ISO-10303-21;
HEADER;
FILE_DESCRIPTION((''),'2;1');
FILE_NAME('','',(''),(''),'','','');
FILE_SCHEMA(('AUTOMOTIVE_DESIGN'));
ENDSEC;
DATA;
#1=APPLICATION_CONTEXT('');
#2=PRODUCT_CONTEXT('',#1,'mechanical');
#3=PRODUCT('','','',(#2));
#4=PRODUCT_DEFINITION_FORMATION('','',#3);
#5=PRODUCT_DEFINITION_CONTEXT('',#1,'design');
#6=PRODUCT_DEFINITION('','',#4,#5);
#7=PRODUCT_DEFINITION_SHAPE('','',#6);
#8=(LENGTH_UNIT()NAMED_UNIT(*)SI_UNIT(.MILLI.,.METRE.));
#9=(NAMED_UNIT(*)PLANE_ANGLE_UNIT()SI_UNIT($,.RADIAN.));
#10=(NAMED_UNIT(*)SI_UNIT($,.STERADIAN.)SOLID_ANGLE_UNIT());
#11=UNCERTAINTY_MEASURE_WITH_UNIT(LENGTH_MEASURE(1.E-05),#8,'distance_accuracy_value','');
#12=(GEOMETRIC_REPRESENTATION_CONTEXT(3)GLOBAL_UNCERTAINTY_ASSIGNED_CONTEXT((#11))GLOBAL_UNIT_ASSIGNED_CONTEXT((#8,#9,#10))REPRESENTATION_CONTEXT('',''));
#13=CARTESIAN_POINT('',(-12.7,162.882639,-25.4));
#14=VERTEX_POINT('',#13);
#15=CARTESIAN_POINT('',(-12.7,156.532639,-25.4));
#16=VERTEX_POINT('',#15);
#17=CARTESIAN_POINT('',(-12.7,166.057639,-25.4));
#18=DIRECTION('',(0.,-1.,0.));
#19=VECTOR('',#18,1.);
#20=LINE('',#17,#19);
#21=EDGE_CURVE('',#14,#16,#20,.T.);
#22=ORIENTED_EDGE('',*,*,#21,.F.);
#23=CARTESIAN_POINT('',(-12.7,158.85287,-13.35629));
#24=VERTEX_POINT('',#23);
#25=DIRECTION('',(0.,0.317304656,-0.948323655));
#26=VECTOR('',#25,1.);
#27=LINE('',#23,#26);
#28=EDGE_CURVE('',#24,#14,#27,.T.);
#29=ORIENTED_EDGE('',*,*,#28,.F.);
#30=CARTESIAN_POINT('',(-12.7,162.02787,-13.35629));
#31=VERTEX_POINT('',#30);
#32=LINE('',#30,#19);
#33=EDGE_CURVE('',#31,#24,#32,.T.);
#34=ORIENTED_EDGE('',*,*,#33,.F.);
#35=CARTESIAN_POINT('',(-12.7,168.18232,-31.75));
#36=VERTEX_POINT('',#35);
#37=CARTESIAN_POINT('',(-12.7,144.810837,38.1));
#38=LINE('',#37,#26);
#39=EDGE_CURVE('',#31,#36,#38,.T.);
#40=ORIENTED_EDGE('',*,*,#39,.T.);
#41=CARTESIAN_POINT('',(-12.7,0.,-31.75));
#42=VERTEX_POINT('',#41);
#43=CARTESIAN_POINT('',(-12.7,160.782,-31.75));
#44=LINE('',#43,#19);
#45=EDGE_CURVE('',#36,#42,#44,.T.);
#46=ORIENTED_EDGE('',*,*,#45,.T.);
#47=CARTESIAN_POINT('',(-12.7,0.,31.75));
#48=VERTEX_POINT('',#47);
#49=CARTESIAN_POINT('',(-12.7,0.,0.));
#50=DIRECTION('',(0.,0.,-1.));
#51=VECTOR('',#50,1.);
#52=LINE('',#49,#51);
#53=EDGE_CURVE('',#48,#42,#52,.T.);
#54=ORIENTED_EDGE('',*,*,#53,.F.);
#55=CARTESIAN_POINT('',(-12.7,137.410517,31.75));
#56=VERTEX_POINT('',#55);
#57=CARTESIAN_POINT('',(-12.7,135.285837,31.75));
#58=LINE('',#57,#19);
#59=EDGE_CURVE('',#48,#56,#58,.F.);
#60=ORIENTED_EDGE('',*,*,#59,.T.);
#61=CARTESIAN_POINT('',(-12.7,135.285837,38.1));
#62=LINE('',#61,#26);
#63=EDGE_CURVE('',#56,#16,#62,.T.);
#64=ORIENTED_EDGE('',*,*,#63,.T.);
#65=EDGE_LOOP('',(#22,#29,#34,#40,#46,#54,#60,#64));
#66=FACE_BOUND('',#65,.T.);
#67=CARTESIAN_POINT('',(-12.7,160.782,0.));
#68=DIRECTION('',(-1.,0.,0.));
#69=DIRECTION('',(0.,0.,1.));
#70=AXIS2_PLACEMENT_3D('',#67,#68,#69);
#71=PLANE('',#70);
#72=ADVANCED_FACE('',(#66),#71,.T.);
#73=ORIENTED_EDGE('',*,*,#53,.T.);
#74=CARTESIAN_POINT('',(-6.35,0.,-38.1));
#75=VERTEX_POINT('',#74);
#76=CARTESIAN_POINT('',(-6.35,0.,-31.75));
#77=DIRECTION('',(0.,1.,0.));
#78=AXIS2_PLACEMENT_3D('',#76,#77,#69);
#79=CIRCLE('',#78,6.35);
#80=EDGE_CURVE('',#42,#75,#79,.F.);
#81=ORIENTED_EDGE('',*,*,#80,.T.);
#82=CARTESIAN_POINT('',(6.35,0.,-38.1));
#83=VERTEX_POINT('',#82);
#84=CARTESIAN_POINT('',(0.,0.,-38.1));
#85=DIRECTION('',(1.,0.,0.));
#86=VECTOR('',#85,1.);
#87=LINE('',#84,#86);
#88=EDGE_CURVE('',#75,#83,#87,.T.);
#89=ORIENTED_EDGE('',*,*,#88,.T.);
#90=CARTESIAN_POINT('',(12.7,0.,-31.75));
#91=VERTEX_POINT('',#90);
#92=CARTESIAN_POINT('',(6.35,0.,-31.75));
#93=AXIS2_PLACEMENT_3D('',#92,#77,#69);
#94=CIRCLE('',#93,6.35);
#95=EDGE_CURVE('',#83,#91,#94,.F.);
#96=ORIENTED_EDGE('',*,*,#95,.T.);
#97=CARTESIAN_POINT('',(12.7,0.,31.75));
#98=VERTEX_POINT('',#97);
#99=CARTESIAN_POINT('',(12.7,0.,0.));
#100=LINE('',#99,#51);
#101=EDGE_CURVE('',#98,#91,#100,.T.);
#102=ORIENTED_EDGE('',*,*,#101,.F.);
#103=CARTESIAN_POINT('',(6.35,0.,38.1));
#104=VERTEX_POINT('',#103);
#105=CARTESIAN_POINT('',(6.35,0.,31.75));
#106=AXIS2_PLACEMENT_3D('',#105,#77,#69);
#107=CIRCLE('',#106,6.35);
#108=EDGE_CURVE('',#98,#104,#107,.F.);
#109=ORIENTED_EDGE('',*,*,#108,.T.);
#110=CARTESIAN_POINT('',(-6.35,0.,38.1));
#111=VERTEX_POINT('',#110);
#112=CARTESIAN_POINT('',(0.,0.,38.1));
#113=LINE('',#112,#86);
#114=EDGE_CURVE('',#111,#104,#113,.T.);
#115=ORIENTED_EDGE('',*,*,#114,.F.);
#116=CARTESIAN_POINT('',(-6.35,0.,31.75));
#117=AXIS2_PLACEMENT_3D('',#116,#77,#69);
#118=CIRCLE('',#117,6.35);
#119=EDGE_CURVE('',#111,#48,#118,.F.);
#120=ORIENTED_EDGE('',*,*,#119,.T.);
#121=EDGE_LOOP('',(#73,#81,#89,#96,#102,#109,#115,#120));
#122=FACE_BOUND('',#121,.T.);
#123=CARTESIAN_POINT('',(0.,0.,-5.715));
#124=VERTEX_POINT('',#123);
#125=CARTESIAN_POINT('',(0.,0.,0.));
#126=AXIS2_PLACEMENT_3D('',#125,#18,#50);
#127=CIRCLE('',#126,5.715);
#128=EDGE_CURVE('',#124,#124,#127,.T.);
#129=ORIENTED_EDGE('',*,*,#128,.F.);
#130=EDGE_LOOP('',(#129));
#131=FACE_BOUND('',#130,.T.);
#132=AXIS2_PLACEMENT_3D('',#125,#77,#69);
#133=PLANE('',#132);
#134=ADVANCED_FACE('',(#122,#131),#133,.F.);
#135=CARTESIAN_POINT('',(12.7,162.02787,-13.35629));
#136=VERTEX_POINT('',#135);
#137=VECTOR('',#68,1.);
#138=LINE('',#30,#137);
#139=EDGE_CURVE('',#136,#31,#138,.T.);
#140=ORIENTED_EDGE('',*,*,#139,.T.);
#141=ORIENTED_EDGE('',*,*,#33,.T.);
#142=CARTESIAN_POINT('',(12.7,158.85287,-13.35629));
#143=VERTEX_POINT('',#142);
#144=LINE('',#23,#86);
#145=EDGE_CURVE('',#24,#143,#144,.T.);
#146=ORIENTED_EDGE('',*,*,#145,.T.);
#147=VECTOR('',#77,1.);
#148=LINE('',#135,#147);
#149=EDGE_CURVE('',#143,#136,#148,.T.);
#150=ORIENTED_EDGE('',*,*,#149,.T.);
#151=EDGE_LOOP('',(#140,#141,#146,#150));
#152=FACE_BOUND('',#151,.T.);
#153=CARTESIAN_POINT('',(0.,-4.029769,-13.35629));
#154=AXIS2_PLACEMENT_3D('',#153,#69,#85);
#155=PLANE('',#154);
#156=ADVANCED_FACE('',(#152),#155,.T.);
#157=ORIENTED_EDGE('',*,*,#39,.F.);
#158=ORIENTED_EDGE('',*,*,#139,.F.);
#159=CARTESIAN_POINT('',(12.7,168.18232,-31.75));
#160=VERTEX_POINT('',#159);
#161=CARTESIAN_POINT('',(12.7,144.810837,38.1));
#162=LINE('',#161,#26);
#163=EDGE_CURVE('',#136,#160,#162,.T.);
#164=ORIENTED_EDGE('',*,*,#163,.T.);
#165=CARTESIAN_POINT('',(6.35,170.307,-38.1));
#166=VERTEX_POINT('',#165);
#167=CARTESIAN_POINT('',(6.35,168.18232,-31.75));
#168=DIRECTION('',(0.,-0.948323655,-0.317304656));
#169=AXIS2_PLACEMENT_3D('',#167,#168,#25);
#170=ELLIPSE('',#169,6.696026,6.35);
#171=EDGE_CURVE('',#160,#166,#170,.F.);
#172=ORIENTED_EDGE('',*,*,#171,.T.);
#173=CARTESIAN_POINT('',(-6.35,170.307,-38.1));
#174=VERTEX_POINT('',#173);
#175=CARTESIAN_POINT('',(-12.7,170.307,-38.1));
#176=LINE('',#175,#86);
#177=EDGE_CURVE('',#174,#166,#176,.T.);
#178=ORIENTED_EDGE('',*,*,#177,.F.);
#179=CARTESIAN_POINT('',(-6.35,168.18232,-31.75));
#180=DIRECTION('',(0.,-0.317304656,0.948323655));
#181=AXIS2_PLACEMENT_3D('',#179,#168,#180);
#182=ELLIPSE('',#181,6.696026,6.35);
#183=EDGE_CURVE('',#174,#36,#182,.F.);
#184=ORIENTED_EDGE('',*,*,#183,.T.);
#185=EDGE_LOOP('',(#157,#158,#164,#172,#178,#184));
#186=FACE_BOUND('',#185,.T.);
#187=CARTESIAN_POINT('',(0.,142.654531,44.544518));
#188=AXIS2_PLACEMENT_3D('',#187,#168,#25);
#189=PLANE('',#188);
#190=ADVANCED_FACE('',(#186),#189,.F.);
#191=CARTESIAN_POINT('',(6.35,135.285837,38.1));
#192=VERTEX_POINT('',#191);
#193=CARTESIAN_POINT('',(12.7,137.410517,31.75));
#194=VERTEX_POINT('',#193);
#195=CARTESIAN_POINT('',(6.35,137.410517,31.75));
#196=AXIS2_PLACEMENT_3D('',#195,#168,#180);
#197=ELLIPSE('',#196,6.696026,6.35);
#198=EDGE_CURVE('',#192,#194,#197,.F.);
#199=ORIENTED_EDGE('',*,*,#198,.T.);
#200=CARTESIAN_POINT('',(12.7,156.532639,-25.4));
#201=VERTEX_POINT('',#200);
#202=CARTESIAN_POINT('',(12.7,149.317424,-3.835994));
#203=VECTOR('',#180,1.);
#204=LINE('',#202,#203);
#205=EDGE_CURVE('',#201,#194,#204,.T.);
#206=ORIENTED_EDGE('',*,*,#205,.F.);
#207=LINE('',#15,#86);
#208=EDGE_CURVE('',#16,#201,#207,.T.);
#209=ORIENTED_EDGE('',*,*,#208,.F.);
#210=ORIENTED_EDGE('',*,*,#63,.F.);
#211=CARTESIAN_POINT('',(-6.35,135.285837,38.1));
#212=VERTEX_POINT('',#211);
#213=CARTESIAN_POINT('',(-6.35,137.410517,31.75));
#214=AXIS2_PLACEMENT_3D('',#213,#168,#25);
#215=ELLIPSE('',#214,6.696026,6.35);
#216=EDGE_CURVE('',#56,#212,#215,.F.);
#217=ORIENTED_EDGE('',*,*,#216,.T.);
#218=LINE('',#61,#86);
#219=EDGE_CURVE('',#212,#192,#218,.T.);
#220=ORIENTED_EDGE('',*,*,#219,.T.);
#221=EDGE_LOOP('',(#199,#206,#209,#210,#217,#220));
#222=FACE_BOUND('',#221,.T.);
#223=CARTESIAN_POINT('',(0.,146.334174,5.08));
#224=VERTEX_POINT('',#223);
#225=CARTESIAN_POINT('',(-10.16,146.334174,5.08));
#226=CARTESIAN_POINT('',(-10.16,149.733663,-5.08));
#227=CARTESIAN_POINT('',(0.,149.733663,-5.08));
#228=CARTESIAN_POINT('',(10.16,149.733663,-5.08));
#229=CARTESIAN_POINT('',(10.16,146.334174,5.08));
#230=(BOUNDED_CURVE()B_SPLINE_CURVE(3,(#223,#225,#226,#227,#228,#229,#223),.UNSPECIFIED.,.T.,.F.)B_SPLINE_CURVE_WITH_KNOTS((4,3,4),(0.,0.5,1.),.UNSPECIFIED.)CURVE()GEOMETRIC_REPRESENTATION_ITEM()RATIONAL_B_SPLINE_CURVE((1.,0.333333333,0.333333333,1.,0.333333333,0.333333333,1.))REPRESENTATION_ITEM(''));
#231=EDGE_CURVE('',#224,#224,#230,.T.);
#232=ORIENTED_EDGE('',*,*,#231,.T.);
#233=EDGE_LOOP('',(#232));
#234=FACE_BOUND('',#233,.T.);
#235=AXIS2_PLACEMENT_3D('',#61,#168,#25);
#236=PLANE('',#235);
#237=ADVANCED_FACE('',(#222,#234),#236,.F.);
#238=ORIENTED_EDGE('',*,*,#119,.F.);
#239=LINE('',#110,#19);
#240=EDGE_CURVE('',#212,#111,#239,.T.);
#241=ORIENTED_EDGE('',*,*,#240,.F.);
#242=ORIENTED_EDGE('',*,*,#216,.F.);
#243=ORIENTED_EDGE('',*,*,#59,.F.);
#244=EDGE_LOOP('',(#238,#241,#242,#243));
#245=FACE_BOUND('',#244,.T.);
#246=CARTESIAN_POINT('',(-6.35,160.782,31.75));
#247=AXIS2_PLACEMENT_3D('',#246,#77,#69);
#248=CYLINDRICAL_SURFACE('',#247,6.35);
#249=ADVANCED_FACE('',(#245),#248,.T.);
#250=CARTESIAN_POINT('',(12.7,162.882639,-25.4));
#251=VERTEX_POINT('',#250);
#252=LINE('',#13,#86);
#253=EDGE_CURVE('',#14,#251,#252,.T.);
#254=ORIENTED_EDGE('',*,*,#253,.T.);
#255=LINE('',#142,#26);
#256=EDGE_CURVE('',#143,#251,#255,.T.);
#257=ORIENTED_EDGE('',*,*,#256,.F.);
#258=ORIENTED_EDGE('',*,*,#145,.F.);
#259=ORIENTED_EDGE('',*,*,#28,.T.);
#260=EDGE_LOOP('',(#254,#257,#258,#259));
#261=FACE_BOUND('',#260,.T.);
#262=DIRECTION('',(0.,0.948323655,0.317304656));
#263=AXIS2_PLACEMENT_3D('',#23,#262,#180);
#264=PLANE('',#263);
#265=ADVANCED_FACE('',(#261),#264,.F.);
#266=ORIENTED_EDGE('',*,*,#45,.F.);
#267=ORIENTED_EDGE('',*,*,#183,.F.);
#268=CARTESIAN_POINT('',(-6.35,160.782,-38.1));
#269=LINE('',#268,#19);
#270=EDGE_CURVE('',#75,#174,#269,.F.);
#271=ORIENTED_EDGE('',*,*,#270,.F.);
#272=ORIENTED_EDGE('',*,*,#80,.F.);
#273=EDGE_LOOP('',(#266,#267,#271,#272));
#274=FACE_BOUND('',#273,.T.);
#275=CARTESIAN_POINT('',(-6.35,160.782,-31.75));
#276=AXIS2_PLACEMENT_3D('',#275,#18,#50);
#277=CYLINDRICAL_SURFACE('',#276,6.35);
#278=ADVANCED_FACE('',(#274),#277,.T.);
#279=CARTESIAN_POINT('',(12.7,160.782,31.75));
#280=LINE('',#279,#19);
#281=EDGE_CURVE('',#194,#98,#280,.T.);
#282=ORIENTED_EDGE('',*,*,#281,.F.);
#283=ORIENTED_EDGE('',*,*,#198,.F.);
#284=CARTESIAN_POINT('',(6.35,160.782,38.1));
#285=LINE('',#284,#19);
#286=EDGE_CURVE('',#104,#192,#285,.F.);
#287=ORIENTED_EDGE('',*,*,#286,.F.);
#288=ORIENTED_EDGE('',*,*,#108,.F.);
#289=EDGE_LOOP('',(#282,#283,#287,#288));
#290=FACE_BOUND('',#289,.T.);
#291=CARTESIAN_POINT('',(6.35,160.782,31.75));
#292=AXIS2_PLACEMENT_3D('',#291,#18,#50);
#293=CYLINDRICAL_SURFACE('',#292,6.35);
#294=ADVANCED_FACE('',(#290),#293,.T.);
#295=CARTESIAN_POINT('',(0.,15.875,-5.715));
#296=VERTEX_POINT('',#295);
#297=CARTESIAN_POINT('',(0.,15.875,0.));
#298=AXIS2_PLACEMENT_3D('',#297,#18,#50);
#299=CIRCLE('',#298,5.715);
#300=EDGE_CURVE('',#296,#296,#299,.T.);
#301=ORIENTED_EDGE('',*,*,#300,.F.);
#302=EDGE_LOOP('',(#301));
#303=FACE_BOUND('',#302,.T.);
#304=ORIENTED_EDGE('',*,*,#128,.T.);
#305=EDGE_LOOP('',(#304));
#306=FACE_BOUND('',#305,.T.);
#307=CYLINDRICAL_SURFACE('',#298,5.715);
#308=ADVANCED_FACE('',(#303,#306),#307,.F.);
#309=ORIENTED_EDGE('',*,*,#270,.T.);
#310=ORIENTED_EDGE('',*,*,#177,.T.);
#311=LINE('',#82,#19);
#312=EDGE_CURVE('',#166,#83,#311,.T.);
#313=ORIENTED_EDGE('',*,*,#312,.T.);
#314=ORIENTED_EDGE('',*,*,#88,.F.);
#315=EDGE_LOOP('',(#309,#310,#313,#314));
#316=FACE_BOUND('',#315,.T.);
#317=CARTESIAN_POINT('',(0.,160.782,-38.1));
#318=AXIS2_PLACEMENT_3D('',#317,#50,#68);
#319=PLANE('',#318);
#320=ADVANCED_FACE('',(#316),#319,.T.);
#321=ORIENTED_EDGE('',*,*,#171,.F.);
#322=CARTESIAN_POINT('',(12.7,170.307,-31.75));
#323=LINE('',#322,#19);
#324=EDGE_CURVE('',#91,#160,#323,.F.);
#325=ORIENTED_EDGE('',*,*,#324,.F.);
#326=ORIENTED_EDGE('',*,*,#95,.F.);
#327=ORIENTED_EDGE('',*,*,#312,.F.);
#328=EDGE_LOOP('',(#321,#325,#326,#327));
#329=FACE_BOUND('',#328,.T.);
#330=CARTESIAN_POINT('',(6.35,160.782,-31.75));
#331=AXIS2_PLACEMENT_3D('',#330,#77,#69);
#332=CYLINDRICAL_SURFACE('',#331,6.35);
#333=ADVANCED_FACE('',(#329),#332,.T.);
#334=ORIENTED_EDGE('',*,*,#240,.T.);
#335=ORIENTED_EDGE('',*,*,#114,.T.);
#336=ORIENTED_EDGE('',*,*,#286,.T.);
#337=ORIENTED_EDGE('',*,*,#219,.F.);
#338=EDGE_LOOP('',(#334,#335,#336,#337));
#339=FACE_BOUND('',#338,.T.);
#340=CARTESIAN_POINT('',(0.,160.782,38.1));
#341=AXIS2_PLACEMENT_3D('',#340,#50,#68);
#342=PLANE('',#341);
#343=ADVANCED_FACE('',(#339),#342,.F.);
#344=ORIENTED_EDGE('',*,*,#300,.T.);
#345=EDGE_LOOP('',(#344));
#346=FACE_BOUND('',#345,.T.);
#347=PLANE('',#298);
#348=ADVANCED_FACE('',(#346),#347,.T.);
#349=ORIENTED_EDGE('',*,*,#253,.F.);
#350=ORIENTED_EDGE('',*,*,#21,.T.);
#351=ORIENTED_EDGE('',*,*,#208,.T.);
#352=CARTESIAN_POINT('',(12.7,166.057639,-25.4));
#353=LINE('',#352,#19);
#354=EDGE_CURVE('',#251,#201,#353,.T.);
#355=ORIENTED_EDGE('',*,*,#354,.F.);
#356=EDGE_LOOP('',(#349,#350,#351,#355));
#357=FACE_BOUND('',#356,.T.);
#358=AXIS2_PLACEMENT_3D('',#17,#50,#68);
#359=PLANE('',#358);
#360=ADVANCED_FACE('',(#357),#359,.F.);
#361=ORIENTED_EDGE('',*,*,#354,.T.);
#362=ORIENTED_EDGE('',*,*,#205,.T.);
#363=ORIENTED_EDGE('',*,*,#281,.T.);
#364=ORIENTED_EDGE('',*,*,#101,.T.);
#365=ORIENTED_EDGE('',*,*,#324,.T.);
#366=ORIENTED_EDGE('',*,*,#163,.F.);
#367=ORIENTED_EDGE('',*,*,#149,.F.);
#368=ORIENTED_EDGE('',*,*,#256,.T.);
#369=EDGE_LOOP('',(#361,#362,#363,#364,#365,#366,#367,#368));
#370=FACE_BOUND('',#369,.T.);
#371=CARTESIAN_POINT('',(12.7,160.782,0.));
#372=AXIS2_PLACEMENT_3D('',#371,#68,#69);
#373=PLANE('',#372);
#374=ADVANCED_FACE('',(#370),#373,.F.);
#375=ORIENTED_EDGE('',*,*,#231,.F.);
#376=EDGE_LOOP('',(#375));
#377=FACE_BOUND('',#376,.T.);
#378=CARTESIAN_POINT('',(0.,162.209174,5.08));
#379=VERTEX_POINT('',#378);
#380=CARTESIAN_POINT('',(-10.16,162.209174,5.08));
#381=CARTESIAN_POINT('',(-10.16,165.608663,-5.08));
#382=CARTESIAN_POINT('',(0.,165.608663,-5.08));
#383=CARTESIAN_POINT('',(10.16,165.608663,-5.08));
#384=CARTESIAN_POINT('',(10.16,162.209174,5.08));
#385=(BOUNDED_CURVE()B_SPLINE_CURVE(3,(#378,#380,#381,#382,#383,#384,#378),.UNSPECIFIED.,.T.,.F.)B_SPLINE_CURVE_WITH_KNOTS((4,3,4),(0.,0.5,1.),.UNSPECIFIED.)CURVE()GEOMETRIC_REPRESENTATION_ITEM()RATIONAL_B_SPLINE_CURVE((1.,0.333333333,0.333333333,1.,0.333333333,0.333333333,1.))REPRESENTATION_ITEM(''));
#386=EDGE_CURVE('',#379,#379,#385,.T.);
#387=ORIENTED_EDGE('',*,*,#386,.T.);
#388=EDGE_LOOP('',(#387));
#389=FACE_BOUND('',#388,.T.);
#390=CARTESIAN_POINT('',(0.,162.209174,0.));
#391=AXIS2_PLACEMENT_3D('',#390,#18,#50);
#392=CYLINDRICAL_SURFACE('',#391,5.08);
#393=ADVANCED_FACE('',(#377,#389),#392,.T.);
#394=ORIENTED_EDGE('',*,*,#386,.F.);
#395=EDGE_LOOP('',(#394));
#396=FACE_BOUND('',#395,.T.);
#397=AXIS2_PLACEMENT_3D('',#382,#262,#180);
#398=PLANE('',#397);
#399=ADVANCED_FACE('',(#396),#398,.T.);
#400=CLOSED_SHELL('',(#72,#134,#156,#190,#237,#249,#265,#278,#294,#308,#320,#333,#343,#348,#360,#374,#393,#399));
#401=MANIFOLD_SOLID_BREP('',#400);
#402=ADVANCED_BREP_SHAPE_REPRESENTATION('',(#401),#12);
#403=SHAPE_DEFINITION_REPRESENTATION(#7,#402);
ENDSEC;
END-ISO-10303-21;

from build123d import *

# Parameters (mm, degrees)
SKETCH1_W               = 25.4
SKETCH1_H               = 76.2
BOSS_EXTRUDE1_DEPTH     = 160.782
CUT_EXTRUDE2_DEPTH      = 168.175421411
CUT_EXTRUDE2_DEPTH_BACK = 168.175421411
BOSS_EXTRUDE2_REACH     = 177.247
SKETCH1_5_W             = 25.4
SKETCH1_5_H             = 12.7
SKETCH8_W               = 25.4
SKETCH8_H               = 3.175
BOSS_EXTRUDE3_DEPTH     = 12.7
FILLET1_R               = 6.35
BOSS_EXTRUDE4_REACH     = 192.853
SKETCH9_R               = 5.08
SKETCH9_3_R             = 5.715
CUT_EXTRUDE5_DEPTH      = 15.875


with BuildPart() as part:
    # Sketch1 → Boss-Extrude1 (new body)
    with BuildSketch(Plane(origin=(0, 0, 0), x_dir=(1, 0, 0), z_dir=(0, 1, 0))):
        Rectangle(SKETCH1_W, SKETCH1_H)
    extrude(amount=BOSS_EXTRUDE1_DEPTH)

    # Sketch4 → Cut-Extrude2 (cut, two sides: drawn at the far end of the back side and taken through both)
    with BuildSketch(Plane(origin=(12.7, 0, 0), x_dir=(0, 0, -1), z_dir=(1, 0, 0)).offset(-CUT_EXTRUDE2_DEPTH_BACK)):
        Polygon((38.1, 160.782), (-38.1, 160.782), (-38.1, 135.285836654), align=None)
    extrude(amount=CUT_EXTRUDE2_DEPTH + CUT_EXTRUDE2_DEPTH_BACK, mode=Mode.SUBTRACT)

    # Boss-Extrude2: from a plane face, 177.247 long prism both ways, kept between that surface and its translate by the depth
    boss_extrude2_start = Plane(origin=(-12.7, 135.285836654, 38.1), z_dir=(0, -0.9483236552061991, -0.31730465640509276)) * Box(710.988, 710.988, 355.494, align=(Align.CENTER, Align.CENTER, Align.MIN), mode=Mode.PRIVATE)
    boss_extrude2_end = Plane(origin=(-12.7, 144.810836654, 38.1), z_dir=(0, -0.9483236552061991, -0.31730465640509276)) * Box(710.988, 710.988, 355.494, align=(Align.CENTER, Align.CENTER, Align.MIN), mode=Mode.PRIVATE)
    # Sketch1<5> → Boss-Extrude2 (add, from a surface)
    with BuildSketch(Plane(origin=(0, 0, 0), x_dir=(1, 0, 0), z_dir=(0, 1, 0)), mode=Mode.PRIVATE) as boss_extrude2_sk1:
        with Locations((0, 31.75)):
            Rectangle(SKETCH1_5_W, SKETCH1_5_H)
    boss_extrude2_tool1 = extrude(boss_extrude2_sk1.sketch, amount=BOSS_EXTRUDE2_REACH, both=True, mode=Mode.PRIVATE)
    add(((boss_extrude2_tool1 - boss_extrude2_start) & boss_extrude2_end).solids().sort_by_distance((-3.175, 151.220939, -9.525))[0])

    # Sketch8 → Boss-Extrude3 (add, along a direction that is not the sketch's normal)
    with BuildSketch(Plane.XY.offset(-25.4)):
        with Locations((0, 164.470139442)):
            Rectangle(SKETCH8_W, SKETCH8_H)
    extrude(amount=BOSS_EXTRUDE3_DEPTH, dir=(0, -0.31730465640509276, 0.9483236552061991))

    # Fillet1
    fillet1_edges = [part.edges().sort_by_distance(p)[0] for p in [
        (-12.7, 85.1535, -38.1),
        (12.7, 85.1535, -38.1),
        (-12.7, 67.642918327, 38.1),
        (12.7, 67.642918327, 38.1),
    ]]
    fillet(fillet1_edges, radius=FILLET1_R)

    # Boss-Extrude4: from a plane face, 192.853 long prism both ways, kept between that surface and its translate by the depth
    boss_extrude4_start = Plane(origin=(-12.7, 135.285836654, 38.1), z_dir=(0, -0.9483236552061991, -0.31730465640509276)) * Box(773.412, 773.412, 386.706, align=(Align.CENTER, Align.CENTER, Align.MIN), mode=Mode.PRIVATE)
    boss_extrude4_end = Plane(origin=(-12.7, 151.160836654, 38.1), z_dir=(0, -0.9483236552061991, -0.31730465640509276)) * Box(773.412, 773.412, 386.706, align=(Align.CENTER, Align.CENTER, Align.MIN), mode=Mode.PRIVATE)
    # Sketch9 → Boss-Extrude4 (add, from a surface)
    with BuildSketch(Plane.XZ, mode=Mode.PRIVATE) as boss_extrude4_sk1:
        Circle(SKETCH9_R)
    boss_extrude4_tool1 = extrude(boss_extrude4_sk1.sketch, amount=BOSS_EXTRUDE4_REACH, both=True, mode=Mode.PRIVATE)
    add(((boss_extrude4_tool1 - boss_extrude4_start) & boss_extrude4_end).solids().sort_by_distance((0, 144.523163, 10.492543))[0])

    # Sketch9<3> → Cut-Extrude5 (cut)
    with BuildSketch(Plane.XZ):
        Circle(SKETCH9_3_R)
    extrude(amount=-CUT_EXTRUDE5_DEPTH, mode=Mode.SUBTRACT)


solid = part.part
